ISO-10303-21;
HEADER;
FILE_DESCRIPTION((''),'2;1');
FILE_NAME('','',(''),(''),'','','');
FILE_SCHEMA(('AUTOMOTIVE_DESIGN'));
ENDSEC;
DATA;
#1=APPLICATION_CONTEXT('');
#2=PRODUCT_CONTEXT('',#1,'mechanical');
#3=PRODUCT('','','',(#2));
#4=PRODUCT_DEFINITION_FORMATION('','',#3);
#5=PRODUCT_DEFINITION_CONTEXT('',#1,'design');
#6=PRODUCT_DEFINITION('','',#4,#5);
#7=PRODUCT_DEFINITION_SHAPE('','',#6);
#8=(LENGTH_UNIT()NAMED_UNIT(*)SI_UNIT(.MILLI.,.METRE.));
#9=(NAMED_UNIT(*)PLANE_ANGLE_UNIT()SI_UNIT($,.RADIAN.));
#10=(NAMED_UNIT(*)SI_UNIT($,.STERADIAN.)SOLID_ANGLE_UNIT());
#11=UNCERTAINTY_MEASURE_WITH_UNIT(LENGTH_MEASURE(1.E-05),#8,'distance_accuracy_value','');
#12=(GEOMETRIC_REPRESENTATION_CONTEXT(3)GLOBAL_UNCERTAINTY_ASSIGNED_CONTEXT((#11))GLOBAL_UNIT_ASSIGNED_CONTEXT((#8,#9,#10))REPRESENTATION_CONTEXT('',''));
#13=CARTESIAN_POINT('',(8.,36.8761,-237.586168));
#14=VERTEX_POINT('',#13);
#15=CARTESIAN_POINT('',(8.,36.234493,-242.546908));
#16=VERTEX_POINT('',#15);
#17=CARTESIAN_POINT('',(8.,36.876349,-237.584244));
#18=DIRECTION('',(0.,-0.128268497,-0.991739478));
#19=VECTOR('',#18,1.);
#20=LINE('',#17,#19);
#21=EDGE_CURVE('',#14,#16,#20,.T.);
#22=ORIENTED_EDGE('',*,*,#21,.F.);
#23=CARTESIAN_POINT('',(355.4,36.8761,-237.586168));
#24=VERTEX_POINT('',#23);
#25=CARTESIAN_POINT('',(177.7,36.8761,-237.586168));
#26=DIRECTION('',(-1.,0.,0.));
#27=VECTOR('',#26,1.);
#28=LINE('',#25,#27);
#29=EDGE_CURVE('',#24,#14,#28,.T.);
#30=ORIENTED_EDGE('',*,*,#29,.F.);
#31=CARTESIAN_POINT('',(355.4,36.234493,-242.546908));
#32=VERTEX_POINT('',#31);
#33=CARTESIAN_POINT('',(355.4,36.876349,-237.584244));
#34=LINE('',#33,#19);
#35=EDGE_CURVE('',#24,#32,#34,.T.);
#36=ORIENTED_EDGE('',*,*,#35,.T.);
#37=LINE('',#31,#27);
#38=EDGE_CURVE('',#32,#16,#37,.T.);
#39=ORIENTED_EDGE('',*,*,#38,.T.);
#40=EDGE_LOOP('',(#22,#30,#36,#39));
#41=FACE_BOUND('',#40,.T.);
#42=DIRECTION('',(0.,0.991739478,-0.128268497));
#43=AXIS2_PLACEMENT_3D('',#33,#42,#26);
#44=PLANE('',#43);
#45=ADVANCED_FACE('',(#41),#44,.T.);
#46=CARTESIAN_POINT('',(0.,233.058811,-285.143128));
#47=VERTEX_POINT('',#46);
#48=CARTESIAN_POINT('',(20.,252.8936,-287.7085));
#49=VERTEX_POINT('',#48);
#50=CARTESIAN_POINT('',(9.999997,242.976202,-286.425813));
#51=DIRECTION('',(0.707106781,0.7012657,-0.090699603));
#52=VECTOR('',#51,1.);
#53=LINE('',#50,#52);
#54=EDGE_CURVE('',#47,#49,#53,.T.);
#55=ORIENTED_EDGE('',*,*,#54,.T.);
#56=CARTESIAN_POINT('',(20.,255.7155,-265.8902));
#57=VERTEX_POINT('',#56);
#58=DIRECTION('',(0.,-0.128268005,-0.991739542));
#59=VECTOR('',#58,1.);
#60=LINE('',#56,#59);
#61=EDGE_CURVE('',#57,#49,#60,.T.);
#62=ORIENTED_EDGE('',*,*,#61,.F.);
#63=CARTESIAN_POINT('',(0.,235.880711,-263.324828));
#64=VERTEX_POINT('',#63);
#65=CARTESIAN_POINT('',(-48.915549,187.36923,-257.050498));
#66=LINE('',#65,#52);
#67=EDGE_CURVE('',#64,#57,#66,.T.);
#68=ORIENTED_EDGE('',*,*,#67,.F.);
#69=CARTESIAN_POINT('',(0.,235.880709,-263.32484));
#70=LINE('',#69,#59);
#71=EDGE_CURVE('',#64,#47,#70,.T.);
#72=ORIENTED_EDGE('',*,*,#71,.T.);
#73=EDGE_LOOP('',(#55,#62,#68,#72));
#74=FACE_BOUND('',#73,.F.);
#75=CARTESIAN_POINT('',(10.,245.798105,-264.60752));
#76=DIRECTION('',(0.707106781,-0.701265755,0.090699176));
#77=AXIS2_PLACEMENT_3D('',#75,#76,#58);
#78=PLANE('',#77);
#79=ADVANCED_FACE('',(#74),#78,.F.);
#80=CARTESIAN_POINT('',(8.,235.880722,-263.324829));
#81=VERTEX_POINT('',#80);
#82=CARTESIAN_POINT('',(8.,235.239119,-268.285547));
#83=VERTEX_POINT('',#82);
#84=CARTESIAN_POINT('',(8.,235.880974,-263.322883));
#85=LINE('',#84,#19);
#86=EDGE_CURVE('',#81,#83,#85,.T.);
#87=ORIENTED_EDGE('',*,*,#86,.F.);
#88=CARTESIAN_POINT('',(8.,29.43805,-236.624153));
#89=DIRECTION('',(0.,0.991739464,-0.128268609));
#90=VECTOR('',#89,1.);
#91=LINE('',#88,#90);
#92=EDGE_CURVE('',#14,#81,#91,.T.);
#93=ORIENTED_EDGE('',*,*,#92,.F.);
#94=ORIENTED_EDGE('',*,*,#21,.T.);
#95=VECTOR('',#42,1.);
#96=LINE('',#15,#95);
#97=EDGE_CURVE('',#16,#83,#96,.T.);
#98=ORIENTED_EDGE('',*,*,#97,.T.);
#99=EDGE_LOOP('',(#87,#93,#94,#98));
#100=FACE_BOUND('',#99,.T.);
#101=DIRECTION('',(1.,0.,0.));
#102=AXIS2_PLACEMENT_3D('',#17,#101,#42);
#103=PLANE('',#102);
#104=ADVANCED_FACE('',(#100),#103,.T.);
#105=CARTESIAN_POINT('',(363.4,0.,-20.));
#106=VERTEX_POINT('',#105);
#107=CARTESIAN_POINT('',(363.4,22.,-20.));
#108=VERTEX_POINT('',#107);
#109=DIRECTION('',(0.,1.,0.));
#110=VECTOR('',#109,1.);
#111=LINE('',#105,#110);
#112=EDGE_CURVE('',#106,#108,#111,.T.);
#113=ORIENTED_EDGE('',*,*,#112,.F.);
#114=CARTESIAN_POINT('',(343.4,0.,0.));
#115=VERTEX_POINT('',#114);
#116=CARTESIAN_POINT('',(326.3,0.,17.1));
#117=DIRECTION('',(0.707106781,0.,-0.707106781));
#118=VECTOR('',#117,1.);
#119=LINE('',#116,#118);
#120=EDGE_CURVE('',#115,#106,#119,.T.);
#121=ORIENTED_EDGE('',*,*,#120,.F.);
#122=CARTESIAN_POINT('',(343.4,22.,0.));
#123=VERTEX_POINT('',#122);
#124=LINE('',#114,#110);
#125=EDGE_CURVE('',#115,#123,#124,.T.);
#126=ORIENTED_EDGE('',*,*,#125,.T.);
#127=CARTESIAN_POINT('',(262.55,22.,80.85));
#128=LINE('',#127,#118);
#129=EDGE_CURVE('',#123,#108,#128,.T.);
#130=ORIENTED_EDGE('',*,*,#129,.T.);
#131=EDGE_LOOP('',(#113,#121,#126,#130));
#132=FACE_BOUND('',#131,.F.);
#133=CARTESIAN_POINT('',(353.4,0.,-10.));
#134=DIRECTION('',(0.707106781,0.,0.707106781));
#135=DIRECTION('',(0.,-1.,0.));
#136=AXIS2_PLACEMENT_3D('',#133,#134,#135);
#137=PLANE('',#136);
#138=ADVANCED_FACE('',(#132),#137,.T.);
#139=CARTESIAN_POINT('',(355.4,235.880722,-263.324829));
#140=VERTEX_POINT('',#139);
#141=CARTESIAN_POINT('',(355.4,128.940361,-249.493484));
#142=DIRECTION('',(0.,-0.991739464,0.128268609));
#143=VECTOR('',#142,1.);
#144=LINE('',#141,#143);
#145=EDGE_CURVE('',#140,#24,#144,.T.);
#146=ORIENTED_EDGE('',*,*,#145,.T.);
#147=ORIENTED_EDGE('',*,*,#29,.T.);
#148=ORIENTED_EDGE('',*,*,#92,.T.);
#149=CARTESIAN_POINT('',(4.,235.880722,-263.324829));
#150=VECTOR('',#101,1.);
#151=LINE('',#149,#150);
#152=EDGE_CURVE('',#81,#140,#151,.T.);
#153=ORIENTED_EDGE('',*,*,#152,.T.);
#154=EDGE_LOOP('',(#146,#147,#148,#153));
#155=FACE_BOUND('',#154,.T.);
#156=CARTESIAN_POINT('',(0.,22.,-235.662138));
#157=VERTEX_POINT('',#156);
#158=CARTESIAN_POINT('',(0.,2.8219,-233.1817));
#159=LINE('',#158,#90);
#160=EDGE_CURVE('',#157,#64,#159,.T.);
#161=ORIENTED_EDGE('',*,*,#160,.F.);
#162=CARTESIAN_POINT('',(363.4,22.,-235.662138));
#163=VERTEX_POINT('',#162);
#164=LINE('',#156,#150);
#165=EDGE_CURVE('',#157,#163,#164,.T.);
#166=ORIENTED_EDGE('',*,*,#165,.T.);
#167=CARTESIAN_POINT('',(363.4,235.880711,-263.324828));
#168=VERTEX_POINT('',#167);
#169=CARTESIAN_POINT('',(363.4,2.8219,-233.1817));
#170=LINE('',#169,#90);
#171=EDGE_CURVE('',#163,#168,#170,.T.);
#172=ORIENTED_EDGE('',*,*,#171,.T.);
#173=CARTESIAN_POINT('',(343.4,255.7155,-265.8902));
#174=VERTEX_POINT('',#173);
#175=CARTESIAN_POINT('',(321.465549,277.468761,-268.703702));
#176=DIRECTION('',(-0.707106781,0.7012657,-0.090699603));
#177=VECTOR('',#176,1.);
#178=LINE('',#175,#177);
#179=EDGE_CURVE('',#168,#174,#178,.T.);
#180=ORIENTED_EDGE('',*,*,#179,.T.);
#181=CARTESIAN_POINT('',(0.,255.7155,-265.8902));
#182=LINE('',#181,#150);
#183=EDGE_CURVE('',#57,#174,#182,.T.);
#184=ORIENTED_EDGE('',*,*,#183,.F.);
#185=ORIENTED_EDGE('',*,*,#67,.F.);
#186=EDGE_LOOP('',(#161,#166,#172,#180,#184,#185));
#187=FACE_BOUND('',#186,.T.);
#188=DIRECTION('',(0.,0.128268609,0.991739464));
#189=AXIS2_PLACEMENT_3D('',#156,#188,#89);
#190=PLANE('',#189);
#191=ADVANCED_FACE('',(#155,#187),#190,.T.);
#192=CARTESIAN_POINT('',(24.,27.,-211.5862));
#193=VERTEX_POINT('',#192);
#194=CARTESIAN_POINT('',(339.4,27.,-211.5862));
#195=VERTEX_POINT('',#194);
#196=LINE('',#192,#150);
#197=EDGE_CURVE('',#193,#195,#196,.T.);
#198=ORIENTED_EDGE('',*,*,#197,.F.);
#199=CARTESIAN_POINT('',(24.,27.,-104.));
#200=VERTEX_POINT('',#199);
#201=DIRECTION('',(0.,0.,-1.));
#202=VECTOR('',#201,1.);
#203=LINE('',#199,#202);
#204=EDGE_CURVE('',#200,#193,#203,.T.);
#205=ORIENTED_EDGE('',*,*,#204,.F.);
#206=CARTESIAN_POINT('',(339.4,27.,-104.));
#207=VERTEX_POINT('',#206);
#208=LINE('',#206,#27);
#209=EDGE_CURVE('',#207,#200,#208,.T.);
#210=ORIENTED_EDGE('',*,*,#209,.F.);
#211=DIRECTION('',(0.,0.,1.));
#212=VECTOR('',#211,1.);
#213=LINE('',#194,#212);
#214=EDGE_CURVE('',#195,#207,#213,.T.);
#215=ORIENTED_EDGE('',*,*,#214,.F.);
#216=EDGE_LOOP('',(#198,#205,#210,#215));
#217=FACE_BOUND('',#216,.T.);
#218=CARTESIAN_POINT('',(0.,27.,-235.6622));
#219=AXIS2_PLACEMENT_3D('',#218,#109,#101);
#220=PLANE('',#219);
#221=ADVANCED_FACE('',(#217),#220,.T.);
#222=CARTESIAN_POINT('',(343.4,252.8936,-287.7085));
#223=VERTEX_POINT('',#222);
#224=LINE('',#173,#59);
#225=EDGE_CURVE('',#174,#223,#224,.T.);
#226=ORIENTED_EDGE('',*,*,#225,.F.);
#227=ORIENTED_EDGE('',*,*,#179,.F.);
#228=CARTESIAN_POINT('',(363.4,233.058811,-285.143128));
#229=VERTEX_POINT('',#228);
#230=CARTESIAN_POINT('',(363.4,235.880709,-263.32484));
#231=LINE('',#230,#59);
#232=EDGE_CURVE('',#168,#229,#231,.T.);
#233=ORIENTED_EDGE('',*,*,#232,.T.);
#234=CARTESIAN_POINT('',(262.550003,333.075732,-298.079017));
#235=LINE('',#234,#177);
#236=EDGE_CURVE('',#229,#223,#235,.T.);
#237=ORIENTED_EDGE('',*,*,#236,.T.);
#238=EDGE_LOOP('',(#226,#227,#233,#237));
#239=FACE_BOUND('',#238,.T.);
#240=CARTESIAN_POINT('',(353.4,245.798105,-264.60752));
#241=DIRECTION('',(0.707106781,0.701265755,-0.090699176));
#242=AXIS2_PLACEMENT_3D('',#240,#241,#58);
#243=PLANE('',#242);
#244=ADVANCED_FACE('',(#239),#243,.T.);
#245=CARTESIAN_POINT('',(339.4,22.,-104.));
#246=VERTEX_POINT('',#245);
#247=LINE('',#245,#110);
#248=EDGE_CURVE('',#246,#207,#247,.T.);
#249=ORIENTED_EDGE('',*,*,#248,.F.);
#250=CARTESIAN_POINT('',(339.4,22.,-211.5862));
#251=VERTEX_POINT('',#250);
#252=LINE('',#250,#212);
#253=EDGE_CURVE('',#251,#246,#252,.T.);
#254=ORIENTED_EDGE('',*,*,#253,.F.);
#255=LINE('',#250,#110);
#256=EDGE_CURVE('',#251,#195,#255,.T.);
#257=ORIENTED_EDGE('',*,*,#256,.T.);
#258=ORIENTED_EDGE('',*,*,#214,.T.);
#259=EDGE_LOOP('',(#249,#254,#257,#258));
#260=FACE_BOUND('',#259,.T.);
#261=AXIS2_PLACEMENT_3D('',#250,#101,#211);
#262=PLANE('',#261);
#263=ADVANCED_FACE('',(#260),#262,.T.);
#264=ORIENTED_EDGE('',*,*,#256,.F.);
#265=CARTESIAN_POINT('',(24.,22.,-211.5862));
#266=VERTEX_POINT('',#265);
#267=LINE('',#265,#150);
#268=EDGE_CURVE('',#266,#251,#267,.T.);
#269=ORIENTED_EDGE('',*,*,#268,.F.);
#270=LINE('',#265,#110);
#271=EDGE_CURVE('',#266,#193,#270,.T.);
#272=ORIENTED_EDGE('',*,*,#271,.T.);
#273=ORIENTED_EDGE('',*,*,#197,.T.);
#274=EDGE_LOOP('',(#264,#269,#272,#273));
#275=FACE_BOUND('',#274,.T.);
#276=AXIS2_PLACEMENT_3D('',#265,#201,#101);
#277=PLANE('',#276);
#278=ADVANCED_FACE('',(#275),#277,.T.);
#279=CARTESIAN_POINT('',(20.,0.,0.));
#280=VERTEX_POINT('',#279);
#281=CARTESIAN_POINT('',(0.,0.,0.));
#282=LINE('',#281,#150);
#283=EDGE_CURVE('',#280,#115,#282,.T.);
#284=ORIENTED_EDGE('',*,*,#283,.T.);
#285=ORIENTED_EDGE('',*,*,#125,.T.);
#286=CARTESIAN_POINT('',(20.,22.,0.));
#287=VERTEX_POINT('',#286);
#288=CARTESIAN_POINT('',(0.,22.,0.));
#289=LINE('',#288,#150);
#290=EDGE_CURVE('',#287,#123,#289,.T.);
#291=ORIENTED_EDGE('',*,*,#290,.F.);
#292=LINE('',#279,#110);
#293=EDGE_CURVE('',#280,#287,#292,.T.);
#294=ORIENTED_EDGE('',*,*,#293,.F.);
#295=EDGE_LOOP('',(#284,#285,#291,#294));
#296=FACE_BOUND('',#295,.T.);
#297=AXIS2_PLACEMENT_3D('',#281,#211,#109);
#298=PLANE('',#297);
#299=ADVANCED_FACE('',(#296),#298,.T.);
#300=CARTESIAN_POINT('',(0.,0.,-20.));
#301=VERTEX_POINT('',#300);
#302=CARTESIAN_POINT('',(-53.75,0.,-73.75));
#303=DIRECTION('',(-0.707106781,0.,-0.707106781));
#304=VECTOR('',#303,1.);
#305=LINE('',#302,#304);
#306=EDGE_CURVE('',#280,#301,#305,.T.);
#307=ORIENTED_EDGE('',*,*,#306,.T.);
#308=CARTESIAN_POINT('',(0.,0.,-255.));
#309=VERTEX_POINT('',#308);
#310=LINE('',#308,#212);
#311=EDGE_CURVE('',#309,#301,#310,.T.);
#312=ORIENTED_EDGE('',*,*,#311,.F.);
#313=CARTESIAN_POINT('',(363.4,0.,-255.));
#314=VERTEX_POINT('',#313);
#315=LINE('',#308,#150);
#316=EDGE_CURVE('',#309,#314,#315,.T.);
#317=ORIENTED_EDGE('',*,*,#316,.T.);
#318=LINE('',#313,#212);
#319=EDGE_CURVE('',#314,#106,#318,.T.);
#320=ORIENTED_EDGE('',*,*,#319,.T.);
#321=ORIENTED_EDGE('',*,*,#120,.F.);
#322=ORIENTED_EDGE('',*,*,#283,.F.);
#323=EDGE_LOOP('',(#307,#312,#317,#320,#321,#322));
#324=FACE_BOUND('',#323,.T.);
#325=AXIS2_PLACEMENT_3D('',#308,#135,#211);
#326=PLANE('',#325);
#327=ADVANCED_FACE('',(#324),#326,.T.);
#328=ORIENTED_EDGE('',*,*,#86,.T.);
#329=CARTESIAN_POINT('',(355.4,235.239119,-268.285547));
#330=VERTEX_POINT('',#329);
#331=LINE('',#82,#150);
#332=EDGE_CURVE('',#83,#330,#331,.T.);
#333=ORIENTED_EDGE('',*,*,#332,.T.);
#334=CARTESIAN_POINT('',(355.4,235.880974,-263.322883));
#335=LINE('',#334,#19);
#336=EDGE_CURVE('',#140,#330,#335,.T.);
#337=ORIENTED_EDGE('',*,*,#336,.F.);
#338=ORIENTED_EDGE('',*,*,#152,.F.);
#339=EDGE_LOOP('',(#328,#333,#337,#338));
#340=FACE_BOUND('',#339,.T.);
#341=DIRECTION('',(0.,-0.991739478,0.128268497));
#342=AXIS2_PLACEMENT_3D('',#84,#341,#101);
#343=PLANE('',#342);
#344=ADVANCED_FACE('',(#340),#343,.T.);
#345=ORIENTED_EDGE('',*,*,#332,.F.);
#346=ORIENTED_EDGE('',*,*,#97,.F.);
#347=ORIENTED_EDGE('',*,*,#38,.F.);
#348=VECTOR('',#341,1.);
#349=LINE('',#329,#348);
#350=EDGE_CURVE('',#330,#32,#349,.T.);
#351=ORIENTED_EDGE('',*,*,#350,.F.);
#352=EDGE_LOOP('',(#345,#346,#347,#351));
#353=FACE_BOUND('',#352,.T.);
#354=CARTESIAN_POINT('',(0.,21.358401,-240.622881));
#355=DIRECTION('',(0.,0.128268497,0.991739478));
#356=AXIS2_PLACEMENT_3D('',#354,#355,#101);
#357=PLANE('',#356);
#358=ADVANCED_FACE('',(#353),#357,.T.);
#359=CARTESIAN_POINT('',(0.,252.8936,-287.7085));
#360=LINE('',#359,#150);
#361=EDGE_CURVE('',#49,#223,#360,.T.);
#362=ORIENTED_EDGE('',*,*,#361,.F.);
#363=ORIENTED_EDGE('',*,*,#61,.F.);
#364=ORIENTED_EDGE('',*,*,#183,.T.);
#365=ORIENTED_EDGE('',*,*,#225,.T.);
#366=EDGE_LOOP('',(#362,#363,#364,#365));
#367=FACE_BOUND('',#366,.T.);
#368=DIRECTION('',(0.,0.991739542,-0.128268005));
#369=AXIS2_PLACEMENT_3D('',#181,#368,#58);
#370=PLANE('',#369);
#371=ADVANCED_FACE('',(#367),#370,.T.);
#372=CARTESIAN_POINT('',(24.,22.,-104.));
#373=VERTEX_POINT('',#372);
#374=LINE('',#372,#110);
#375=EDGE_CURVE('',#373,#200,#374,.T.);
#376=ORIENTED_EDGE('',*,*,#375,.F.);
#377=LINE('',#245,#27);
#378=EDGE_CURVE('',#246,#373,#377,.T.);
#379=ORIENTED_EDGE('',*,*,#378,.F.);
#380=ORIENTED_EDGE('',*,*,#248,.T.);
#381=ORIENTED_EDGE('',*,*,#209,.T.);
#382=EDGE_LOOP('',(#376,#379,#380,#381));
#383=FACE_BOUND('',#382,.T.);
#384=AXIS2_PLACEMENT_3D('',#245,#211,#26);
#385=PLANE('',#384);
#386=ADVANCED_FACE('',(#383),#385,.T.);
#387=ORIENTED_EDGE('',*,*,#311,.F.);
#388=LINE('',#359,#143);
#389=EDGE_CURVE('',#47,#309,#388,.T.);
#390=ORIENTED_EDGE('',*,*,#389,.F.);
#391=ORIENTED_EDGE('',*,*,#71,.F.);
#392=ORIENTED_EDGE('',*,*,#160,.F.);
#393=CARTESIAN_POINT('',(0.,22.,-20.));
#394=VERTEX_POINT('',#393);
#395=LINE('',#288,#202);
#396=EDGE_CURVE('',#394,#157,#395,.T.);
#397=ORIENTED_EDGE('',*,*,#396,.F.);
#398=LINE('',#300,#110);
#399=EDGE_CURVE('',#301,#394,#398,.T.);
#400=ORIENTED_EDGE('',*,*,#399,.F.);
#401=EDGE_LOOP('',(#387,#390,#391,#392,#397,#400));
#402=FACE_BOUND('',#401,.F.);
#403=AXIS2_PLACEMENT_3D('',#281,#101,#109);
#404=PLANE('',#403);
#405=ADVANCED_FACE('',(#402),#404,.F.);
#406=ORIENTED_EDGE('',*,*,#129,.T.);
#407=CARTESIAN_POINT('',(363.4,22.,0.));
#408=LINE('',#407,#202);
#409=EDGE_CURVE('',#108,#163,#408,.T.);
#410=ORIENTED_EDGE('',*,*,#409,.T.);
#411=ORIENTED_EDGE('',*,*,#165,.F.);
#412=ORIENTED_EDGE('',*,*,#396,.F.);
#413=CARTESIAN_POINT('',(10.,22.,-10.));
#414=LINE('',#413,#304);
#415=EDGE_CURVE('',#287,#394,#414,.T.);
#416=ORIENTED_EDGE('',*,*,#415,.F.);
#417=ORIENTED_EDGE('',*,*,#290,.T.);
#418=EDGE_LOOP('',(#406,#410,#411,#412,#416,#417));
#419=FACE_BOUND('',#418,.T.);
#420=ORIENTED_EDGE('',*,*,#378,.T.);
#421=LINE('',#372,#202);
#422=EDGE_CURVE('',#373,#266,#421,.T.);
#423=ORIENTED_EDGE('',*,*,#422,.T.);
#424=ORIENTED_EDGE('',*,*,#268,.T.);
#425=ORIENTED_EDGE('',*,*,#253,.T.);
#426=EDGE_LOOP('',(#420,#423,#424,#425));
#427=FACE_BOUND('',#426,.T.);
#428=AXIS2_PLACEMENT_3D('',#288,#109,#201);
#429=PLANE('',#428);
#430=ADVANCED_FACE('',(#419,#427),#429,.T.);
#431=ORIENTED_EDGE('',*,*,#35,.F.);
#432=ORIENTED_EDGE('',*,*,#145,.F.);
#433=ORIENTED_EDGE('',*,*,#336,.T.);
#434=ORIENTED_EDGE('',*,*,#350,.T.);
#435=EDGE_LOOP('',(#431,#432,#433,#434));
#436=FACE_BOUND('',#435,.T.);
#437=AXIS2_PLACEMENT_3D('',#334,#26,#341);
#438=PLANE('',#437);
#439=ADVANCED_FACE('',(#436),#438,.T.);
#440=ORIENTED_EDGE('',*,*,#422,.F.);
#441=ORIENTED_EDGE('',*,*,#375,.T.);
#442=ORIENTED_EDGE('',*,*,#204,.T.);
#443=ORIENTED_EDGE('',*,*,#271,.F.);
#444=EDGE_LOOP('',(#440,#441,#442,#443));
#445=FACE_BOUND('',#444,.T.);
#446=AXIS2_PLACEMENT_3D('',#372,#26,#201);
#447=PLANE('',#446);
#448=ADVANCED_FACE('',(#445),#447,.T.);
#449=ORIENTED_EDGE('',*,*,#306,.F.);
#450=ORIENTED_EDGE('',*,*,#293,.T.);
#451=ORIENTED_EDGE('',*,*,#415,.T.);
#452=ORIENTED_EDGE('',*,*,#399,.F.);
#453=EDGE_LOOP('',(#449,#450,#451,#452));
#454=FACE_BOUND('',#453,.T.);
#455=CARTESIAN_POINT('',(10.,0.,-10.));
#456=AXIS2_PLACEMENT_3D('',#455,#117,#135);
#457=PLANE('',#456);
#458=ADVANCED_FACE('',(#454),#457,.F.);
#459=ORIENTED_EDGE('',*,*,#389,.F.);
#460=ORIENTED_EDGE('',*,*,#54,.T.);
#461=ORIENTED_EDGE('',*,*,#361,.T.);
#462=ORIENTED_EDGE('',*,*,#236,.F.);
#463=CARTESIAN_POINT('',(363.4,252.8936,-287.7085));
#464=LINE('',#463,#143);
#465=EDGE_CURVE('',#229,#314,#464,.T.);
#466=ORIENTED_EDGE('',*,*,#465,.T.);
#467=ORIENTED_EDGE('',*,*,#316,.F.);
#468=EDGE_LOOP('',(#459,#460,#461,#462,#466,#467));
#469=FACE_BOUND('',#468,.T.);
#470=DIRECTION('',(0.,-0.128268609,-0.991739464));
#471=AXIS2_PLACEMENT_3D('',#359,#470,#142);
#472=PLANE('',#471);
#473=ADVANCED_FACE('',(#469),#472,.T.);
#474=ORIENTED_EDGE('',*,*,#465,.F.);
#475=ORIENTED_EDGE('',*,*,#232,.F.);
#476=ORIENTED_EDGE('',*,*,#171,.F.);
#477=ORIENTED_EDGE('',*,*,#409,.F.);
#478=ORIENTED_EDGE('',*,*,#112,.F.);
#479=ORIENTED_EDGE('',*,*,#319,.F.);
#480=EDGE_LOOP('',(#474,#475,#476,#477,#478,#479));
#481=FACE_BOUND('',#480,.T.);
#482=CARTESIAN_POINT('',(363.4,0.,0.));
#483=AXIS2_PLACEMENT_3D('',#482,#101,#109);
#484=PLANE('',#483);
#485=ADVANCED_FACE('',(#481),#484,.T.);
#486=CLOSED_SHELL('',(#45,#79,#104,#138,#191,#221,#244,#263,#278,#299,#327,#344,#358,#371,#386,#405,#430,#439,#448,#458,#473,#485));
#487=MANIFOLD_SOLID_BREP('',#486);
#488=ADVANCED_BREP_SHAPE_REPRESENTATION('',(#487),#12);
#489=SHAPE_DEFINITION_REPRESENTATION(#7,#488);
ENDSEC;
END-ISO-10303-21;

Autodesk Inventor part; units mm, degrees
ref_plane "YZ Plane" through (0, 0, 0) normal (1, 0, 0) x (0, 1, 0)
ref_plane "XZ Plane" through (0, 0, 0) normal (0, 1, 0) x (-1, 0, 0)
ref_plane "XY Plane" through (0, 0, 0) normal (0, 0, 1) x (1, 0, 0)
sketch "Sketch1" plane through (0, 0, 0) normal (1, 0, 0) x (0, 1, 0)
  line L0 (0, 0) -> (22, 0)
  line L1 (22, 0) -> (22, -255)
  line L2 (22, -255) -> (0, -255)
  line L3 (0, -255) -> (0, 0)
  line L4 (0, -255) -> (2.8219, -233.1817)
  line L5 (2.8219, -233.1817) -> (255.7155, -265.8902)
  line L6 (255.7155, -265.8902) -> (252.8936, -287.7085)
  line L7 (252.8936, -287.7085) -> (0, -255)
  point P0 (22, -235.6622)
  dimension "d0" = 22
  dimension "d1" = 255
  dimension "d2" = 22
  dimension "d3" = 255
extrude "Extrusion1" add sketch "Sketch1" along normal blind 363.4
chamfer "Chamfer1" distance 20 angle 45 4 edges at (363.4, 254.3045, -276.7993) (0, 254.3045, -276.7993) (363.4, 11, 0) (0, 11, 0)
sketch "Sketch2" plane through (0, 22, -235.6622) normal (0, 0.1282685, 0.9917395) x (1, 0, 0)
  line L0 (8, 215.6622) -> (355.4, 215.6622)
  line L1 (355.4, 215.6622) -> (355.4, 15)
  line L2 (355.4, 15) -> (8, 15)
  line L3 (8, 15) -> (8, 215.6622)
  line L4 (0, 215.6622) -> (0, 0) projected
  line L5 (363.4, 215.6622) -> (363.4, 0) projected
  line L6 (20, 235.6622) -> (343.4, 235.6622) projected
  line L7 (0, 0) -> (363.4, 0) projected
  point P0 (0, -52.0463)
  dimension "d9" = 8
  dimension "d10" = 8
  dimension "d11" = 20
  dimension "d12" = 15
extrude "Extrusion2" cut sketch "Sketch2" against normal blind 5
sketch "Sketch4" plane through (0, 22, -235.6622) normal (0, 1, 0) x (1, 0, 0)
  line L0 (24, -24.076) -> (339.4, -24.076)
  line L1 (339.4, -24.076) -> (339.4, -131.6622)
  line L2 (339.4, -131.6622) -> (24, -131.6622)
  line L3 (24, -131.6622) -> (24, -24.076)
  line L4 (355.4, 1.924) -> (8, 1.924) projected
  line L5 (0, 0) -> (0, -215.6622) projected
  line L6 (363.4, 0) -> (363.4, -215.6622) projected
  line L7 (20, -235.6622) -> (343.4, -235.6622) projected
  dimension "d15" = 26
  dimension "d16" = 24
  dimension "d17" = 24
  dimension "d18" = 104
extrude "Extrusion3" add sketch "Sketch4" along normal blind 5
properties part number "Laptop" material "PBT Plastic"
